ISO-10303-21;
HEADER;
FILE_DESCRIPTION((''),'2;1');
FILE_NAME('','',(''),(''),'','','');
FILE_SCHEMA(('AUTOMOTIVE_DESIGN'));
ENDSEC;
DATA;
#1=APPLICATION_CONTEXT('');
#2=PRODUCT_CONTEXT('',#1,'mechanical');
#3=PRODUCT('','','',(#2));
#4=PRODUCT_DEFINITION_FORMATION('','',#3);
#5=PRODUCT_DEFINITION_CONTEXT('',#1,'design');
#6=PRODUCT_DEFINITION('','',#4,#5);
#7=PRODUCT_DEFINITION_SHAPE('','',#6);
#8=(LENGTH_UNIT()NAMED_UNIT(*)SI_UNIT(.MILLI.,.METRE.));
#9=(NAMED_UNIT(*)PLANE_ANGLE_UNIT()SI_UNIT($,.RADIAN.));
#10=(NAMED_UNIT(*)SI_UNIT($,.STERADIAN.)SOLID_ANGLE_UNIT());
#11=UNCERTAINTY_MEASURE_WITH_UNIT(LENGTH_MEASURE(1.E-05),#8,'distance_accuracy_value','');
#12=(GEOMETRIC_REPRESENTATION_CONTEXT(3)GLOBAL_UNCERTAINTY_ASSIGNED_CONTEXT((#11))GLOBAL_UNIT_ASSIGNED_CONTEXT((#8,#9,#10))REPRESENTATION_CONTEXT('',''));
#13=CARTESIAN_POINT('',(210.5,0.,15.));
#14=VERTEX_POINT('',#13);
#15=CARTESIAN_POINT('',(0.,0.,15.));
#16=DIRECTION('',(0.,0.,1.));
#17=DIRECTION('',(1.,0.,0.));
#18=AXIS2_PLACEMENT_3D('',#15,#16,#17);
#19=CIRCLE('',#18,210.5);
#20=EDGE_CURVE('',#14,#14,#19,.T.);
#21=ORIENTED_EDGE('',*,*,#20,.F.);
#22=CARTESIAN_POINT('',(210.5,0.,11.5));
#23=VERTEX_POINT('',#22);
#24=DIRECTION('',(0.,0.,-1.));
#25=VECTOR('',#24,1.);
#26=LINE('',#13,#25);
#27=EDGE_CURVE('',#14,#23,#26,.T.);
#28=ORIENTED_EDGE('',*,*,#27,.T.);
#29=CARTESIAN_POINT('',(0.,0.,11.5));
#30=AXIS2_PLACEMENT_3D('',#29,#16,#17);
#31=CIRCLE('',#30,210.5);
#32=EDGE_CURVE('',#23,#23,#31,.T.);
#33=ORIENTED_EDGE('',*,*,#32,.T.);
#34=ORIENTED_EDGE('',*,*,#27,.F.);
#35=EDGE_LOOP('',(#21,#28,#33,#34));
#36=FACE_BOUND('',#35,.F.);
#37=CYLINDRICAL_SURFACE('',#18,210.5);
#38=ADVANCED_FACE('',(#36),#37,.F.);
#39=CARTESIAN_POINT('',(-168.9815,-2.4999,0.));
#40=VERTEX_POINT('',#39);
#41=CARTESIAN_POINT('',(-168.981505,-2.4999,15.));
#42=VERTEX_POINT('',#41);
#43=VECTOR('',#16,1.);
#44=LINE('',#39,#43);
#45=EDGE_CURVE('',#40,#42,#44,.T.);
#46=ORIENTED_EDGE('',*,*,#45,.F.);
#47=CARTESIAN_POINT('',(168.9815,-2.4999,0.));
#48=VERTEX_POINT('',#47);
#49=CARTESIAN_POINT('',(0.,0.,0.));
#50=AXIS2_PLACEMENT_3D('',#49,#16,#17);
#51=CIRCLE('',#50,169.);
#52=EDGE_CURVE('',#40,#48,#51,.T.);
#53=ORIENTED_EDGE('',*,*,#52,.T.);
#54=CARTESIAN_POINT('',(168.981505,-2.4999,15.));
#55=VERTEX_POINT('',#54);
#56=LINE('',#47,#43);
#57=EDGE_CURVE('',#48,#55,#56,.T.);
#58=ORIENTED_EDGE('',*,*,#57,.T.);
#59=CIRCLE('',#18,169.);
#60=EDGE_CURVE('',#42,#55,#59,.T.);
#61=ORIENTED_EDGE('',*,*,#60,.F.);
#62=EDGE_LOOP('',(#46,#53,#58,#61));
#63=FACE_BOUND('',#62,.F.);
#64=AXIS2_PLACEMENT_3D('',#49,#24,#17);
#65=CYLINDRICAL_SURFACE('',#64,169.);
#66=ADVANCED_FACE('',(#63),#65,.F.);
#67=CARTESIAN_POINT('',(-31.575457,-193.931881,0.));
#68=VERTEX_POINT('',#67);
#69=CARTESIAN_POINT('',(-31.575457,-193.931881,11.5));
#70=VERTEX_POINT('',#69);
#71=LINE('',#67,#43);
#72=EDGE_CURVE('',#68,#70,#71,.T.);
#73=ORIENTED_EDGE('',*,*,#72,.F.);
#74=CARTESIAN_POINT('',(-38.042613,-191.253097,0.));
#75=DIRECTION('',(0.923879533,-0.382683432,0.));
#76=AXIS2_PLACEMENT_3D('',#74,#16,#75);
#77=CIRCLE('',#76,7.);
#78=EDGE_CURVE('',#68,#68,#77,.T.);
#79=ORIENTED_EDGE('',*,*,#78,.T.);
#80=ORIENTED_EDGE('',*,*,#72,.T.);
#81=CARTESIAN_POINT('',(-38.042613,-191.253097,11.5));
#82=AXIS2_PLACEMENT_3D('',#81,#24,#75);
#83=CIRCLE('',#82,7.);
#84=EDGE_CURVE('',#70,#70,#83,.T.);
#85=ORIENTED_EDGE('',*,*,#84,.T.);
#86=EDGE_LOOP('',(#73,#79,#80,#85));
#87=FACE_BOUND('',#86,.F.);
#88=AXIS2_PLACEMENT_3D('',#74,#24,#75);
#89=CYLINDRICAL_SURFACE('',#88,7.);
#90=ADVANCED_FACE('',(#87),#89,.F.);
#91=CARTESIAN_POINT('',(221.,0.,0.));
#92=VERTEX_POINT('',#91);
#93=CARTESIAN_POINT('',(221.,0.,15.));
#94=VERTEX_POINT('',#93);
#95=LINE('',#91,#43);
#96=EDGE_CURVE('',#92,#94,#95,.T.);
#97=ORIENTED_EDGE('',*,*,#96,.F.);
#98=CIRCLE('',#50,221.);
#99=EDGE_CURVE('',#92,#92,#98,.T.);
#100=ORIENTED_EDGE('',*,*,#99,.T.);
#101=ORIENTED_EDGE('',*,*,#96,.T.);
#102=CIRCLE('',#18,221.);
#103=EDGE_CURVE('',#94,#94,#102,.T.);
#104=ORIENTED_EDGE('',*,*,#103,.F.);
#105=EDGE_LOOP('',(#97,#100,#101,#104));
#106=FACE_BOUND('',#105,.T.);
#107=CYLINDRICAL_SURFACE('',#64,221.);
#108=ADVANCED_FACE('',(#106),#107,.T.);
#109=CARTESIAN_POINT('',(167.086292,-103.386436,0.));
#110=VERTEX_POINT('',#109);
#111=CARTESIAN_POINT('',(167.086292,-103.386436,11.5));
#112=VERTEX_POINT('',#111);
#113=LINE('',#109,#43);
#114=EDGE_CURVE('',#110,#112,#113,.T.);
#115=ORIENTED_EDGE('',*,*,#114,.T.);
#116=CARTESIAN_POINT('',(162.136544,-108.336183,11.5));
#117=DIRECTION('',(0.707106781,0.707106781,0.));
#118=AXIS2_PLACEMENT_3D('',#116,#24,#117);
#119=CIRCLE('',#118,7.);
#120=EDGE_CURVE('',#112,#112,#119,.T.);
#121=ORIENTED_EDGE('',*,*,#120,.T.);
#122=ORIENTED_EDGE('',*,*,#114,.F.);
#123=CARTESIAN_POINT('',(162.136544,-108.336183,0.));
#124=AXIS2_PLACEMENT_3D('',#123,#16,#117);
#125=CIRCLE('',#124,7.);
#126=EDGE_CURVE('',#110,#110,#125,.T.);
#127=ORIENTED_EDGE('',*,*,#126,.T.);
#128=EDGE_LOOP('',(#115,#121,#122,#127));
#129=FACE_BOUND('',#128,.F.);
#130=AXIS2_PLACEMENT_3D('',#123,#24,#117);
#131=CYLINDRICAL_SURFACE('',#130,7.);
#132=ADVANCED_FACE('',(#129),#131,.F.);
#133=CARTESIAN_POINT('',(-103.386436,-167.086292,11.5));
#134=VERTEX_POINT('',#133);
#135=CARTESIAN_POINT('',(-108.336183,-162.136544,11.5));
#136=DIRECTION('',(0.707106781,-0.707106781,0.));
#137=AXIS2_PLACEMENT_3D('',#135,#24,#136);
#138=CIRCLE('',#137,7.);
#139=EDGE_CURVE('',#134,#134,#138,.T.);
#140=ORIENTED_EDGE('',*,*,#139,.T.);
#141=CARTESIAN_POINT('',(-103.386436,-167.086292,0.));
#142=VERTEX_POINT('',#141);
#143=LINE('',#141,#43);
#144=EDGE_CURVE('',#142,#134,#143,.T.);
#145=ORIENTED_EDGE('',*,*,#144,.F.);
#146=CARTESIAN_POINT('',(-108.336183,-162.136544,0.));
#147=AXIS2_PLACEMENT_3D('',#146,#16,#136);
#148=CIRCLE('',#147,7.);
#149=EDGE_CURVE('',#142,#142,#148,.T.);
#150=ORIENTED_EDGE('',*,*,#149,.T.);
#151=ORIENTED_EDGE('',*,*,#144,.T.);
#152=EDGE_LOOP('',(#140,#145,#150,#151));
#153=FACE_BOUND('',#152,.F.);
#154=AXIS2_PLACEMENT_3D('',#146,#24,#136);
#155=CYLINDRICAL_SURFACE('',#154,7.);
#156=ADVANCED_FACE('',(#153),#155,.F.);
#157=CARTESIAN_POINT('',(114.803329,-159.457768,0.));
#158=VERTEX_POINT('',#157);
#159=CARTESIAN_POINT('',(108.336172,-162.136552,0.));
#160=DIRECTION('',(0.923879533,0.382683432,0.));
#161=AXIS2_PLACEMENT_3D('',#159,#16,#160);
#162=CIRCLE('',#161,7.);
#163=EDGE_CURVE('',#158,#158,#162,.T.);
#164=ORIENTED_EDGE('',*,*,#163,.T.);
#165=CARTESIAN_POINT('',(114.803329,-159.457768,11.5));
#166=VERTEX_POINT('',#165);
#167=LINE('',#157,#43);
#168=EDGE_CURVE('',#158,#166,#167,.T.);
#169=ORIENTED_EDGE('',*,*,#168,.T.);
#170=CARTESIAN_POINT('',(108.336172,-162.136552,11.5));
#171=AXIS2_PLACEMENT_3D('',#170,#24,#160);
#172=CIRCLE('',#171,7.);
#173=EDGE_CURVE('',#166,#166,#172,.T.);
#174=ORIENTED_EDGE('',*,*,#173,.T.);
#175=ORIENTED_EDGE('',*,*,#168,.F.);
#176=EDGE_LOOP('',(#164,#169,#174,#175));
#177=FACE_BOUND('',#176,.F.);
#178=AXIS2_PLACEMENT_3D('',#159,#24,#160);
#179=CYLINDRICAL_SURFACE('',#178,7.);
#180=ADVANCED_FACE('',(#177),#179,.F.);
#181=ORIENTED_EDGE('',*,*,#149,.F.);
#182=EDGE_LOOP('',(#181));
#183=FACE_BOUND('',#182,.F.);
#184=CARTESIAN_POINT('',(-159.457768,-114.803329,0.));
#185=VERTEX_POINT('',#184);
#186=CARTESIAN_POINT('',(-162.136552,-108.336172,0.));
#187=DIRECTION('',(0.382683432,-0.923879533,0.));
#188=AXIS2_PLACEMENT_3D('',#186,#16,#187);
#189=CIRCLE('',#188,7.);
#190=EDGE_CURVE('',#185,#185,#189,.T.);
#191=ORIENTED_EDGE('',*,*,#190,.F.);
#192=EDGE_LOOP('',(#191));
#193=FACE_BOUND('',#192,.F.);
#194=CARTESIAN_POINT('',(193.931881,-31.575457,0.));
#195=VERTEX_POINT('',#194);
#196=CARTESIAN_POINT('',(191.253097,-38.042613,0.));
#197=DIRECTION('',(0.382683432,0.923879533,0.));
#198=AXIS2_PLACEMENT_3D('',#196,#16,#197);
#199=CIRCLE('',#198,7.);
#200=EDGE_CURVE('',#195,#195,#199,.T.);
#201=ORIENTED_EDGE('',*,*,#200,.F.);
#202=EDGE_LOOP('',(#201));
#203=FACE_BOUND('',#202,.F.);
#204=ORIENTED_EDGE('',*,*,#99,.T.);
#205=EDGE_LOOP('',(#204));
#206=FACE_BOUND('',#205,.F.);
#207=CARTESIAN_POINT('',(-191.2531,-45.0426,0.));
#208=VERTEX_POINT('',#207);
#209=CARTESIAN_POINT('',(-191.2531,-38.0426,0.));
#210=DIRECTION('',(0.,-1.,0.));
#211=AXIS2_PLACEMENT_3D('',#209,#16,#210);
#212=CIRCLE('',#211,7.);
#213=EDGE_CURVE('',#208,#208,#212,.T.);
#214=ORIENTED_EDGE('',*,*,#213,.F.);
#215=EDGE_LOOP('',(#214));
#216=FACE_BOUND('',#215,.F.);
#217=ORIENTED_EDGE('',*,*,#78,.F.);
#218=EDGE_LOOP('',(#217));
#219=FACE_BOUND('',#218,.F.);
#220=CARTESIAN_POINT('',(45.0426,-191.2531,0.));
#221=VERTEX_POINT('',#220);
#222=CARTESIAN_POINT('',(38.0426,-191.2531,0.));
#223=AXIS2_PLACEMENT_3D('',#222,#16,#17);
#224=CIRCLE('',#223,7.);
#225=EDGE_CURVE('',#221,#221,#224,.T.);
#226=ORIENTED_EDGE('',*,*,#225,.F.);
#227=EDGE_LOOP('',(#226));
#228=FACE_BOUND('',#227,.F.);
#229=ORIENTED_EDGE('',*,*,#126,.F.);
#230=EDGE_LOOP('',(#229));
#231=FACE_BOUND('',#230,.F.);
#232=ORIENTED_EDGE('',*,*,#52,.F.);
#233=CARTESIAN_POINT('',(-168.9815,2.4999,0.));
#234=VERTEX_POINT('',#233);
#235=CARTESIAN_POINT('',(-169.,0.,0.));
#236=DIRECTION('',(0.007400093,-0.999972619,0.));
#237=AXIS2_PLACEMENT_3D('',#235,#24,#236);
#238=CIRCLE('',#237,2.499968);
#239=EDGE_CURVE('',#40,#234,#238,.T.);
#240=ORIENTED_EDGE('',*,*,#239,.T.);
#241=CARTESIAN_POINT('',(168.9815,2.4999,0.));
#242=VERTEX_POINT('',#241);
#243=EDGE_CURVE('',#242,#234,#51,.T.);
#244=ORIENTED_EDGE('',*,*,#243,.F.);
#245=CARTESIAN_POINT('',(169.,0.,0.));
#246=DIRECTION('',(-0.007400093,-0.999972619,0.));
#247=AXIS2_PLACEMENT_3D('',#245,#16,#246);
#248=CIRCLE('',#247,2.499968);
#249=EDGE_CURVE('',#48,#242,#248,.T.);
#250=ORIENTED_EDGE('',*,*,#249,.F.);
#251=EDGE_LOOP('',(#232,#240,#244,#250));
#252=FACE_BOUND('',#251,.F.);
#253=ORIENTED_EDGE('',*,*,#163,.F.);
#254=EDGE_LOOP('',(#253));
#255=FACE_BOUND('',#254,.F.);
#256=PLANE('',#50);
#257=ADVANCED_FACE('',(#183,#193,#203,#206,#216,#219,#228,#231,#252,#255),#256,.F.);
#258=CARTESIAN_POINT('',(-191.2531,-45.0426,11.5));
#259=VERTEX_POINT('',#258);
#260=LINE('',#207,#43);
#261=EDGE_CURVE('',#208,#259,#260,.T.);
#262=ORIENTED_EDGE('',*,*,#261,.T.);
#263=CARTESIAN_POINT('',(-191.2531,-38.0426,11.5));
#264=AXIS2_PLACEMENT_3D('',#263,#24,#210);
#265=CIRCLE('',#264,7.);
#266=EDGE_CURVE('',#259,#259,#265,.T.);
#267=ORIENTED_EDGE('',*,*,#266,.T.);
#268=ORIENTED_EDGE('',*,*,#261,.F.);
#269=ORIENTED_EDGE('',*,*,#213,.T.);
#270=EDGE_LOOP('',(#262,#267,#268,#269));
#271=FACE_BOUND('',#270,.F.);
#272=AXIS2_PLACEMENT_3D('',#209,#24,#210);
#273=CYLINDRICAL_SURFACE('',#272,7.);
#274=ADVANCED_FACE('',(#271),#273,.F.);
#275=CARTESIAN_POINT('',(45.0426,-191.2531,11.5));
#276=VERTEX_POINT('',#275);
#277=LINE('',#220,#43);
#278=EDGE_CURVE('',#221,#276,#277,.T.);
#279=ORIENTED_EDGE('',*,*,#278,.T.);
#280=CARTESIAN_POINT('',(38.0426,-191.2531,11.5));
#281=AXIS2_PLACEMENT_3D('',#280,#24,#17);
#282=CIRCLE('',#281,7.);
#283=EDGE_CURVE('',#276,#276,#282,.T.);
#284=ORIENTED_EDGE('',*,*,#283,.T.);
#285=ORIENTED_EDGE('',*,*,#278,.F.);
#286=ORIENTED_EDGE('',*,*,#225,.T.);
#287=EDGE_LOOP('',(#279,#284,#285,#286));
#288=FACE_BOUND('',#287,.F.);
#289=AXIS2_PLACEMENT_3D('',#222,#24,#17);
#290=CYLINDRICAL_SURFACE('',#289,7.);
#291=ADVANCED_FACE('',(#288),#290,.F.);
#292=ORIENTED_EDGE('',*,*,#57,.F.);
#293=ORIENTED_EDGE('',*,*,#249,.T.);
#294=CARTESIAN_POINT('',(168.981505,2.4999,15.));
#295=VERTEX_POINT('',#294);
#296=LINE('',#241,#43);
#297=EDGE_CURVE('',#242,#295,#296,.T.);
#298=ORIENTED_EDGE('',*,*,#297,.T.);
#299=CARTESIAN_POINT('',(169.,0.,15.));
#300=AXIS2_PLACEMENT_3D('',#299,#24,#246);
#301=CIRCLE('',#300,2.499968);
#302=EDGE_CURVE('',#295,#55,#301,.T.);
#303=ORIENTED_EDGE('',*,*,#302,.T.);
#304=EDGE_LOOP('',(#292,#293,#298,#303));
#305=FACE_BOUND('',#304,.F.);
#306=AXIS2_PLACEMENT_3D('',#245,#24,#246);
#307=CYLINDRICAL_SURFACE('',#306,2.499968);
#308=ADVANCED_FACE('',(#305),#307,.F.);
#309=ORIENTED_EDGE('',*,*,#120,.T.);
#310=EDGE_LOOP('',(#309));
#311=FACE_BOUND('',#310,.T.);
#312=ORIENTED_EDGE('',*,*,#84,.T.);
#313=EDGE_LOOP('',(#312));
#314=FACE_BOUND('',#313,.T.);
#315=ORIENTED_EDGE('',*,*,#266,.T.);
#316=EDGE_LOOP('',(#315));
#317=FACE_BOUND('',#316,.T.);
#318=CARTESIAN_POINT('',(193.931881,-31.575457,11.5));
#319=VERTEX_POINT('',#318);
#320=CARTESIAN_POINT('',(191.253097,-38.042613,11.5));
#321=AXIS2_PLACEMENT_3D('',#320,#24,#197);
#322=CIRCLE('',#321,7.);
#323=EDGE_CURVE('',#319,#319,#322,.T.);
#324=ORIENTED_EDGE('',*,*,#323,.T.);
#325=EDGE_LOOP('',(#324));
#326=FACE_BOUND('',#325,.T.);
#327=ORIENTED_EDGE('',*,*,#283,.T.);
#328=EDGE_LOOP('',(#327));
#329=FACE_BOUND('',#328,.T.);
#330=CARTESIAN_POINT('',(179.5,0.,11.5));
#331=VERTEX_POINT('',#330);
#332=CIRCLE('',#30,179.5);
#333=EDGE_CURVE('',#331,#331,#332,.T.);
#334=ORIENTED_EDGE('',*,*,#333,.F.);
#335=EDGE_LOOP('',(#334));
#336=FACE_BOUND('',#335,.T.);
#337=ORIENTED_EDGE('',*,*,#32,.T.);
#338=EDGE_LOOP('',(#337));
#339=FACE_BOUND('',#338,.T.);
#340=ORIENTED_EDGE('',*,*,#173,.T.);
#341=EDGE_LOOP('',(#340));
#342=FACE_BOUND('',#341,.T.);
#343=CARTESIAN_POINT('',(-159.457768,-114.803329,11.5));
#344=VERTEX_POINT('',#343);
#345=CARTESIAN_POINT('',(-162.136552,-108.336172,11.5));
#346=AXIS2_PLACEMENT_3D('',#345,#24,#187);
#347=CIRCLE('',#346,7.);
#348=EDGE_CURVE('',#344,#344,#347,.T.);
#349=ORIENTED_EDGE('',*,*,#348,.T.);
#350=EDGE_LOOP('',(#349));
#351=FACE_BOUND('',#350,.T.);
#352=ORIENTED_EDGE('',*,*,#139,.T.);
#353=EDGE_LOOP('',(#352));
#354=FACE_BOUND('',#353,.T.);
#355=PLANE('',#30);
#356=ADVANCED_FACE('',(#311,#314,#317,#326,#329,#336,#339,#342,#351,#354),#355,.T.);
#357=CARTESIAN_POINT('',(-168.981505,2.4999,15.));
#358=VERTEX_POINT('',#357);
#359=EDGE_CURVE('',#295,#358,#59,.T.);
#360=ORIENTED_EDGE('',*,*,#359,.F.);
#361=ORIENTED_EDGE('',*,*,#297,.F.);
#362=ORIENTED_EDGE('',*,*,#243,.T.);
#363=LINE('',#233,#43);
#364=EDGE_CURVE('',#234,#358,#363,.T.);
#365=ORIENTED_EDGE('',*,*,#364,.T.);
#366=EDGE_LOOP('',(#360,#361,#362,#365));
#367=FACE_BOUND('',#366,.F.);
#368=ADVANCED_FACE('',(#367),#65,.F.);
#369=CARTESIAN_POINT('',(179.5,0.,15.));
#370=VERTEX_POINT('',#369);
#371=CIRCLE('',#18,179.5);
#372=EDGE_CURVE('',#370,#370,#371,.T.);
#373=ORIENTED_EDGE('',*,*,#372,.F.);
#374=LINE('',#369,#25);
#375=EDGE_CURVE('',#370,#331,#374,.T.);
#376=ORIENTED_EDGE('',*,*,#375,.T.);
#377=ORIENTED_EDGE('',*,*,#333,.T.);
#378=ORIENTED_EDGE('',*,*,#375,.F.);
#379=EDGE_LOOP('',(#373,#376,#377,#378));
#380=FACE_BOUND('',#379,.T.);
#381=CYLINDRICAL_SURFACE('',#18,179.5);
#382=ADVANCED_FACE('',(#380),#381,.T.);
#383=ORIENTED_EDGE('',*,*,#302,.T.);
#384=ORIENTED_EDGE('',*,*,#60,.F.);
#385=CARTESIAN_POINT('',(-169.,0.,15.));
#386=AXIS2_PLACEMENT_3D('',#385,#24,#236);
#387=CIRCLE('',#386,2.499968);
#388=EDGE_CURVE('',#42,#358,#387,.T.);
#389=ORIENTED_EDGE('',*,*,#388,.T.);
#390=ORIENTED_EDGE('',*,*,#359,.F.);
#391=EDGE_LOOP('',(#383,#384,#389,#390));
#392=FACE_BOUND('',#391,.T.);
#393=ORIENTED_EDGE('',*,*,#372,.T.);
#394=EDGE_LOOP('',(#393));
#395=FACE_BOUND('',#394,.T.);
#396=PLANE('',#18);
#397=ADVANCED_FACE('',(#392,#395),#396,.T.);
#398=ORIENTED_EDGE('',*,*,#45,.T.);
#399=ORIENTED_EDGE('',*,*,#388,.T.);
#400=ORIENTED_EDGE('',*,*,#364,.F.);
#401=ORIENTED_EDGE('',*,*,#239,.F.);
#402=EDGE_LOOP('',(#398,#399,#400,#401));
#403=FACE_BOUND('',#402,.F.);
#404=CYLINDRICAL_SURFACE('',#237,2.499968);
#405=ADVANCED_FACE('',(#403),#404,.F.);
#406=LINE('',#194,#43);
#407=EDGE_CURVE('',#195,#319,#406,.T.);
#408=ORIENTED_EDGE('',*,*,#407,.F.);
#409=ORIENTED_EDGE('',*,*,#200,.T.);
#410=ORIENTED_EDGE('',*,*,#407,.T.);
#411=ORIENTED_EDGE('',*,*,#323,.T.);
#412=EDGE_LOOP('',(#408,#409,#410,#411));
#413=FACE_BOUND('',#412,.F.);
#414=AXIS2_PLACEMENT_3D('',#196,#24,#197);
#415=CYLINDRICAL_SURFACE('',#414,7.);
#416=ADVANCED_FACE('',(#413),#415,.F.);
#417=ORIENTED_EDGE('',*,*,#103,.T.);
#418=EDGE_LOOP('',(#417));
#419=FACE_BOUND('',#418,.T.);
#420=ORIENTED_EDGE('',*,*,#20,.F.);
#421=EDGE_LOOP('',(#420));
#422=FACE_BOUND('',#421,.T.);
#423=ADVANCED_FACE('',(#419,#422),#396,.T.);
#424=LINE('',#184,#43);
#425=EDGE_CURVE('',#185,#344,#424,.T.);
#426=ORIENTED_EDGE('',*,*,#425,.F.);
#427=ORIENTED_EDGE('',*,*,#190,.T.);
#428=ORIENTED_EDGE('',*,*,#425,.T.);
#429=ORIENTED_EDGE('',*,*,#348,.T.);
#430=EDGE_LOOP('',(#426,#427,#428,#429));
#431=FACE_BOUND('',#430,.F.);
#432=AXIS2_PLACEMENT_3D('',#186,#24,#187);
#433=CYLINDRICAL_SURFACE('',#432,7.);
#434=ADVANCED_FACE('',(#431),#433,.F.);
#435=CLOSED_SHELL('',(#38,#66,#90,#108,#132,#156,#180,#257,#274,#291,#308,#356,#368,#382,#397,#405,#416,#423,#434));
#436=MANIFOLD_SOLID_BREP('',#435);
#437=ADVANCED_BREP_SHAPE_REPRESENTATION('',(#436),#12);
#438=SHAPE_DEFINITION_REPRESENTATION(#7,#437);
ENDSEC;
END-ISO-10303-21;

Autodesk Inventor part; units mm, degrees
ref_plane "YZ Plane" through (0, 0, 0) normal (1, 0, 0) x (0, 1, 0)
ref_plane "XZ Plane" through (0, 0, 0) normal (0, 1, 0) x (-1, 0, 0)
ref_plane "XY Plane" through (0, 0, 0) normal (0, 0, 1) x (1, 0, 0)
sketch "Sketch1" plane through (0, 0, 0) normal (0, 0, 1) x (1, 0, 0)
  circle A0 centre (0, 0) radius 169
  circle A1 centre (0, 0) radius 221
  circle A2 centre (0, 0) radius 195 construction
  line L0 (0, 169) -> (0, 221) construction
  point P0 (0, 195)
  dimension "d17" = 390
  dimension "d18" = 52
extrude "Extrusion1" add sketch "Sketch1" along normal blind 15
sketch "Sketch2" plane through (0, 0, 15) normal (0, 0, 1) x (1, 0, 0)
  circle A0 centre (0, 0) radius 221 construction
  circle A1 centre (0, 0) radius 169 construction
  line L0 (0, 210.5) -> (0, 179.5) construction
  line L1 (0, 169) -> (0, 0) construction
  circle A2 centre (0, 0) radius 179.5
  circle A3 centre (0, 0) radius 210.5
  circle A4 centre (0, 0) radius 195 construction
  point P0 (0, 195)
  dimension "d19" = 390
  dimension "d4" = 31
extrude "Extrusion2" cut sketch "Sketch2" against normal blind 3.5
sketch "Sketch3" plane through (0, 0, 0) normal (0, 0, 1) x (1, 0, 0)
  circle A0 centre (0, 0) radius 169 construction
  circle A1 centre (0, 0) radius 221 construction
  circle A2 centre (0, 0) radius 179.5 projected
  circle A3 centre (0, 0) radius 210.5 projected
  circle A4 centre (0, 0) radius 221 projected
  line L0 (0, 0) -> (0, -221) construction
  line L1 (0, 0) -> (43.115, -216.7535) construction
  line L2 (35.0187, -176.051) -> (41.0665, -206.4553) construction
  circle A5 centre (38.0426, -191.2531) radius 7
  dimension "d20" = 11.25
  dimension "d21" = 14
extrude "Extrusion3" cut sketch "Sketch3" along normal through all contours A5
pattern_circular "Circular Pattern2" count 8 over 157.5 about axis through (0, 0, 0) along (0, 0, -1) of "Extrusion3" both ways yes
sketch "Sketch5" plane through (0, 0, 0) normal (0, 0, -1) x (-1, 0, 0)
  circle A0 centre (0, 0) radius 169 projected
  circle A1 centre (0, 0) radius 221 projected
  line L0 (0, 0) -> (169, 0) construction
  arc A2 (168.9815, -2.4999) -> (168.9815, 2.4999) centre (169, 0) ccw
  dimension "d36" = 5
extrude "Extrusion4" cut sketch "Sketch5" against normal through all contours A0 A2
mirror "Mirror1" about plane through (0, 0, 0) normal (1, 0, 0) of "Extrusion4"
equation "\"d17\" = Шпил_пласт_НОС_диам_центров"
equation "\"d19\" = Шпил_пласт_НОС_диам_центров"
equation "\"BendReliefDepth\" = 0.5 * Thickness"
equation "\"Шпил_пласт_НОС_диам_центров\" = 390"
equation "\"Thickness\" = 10"
properties part number "ДМФ 021 кольцо прижимное нос"
